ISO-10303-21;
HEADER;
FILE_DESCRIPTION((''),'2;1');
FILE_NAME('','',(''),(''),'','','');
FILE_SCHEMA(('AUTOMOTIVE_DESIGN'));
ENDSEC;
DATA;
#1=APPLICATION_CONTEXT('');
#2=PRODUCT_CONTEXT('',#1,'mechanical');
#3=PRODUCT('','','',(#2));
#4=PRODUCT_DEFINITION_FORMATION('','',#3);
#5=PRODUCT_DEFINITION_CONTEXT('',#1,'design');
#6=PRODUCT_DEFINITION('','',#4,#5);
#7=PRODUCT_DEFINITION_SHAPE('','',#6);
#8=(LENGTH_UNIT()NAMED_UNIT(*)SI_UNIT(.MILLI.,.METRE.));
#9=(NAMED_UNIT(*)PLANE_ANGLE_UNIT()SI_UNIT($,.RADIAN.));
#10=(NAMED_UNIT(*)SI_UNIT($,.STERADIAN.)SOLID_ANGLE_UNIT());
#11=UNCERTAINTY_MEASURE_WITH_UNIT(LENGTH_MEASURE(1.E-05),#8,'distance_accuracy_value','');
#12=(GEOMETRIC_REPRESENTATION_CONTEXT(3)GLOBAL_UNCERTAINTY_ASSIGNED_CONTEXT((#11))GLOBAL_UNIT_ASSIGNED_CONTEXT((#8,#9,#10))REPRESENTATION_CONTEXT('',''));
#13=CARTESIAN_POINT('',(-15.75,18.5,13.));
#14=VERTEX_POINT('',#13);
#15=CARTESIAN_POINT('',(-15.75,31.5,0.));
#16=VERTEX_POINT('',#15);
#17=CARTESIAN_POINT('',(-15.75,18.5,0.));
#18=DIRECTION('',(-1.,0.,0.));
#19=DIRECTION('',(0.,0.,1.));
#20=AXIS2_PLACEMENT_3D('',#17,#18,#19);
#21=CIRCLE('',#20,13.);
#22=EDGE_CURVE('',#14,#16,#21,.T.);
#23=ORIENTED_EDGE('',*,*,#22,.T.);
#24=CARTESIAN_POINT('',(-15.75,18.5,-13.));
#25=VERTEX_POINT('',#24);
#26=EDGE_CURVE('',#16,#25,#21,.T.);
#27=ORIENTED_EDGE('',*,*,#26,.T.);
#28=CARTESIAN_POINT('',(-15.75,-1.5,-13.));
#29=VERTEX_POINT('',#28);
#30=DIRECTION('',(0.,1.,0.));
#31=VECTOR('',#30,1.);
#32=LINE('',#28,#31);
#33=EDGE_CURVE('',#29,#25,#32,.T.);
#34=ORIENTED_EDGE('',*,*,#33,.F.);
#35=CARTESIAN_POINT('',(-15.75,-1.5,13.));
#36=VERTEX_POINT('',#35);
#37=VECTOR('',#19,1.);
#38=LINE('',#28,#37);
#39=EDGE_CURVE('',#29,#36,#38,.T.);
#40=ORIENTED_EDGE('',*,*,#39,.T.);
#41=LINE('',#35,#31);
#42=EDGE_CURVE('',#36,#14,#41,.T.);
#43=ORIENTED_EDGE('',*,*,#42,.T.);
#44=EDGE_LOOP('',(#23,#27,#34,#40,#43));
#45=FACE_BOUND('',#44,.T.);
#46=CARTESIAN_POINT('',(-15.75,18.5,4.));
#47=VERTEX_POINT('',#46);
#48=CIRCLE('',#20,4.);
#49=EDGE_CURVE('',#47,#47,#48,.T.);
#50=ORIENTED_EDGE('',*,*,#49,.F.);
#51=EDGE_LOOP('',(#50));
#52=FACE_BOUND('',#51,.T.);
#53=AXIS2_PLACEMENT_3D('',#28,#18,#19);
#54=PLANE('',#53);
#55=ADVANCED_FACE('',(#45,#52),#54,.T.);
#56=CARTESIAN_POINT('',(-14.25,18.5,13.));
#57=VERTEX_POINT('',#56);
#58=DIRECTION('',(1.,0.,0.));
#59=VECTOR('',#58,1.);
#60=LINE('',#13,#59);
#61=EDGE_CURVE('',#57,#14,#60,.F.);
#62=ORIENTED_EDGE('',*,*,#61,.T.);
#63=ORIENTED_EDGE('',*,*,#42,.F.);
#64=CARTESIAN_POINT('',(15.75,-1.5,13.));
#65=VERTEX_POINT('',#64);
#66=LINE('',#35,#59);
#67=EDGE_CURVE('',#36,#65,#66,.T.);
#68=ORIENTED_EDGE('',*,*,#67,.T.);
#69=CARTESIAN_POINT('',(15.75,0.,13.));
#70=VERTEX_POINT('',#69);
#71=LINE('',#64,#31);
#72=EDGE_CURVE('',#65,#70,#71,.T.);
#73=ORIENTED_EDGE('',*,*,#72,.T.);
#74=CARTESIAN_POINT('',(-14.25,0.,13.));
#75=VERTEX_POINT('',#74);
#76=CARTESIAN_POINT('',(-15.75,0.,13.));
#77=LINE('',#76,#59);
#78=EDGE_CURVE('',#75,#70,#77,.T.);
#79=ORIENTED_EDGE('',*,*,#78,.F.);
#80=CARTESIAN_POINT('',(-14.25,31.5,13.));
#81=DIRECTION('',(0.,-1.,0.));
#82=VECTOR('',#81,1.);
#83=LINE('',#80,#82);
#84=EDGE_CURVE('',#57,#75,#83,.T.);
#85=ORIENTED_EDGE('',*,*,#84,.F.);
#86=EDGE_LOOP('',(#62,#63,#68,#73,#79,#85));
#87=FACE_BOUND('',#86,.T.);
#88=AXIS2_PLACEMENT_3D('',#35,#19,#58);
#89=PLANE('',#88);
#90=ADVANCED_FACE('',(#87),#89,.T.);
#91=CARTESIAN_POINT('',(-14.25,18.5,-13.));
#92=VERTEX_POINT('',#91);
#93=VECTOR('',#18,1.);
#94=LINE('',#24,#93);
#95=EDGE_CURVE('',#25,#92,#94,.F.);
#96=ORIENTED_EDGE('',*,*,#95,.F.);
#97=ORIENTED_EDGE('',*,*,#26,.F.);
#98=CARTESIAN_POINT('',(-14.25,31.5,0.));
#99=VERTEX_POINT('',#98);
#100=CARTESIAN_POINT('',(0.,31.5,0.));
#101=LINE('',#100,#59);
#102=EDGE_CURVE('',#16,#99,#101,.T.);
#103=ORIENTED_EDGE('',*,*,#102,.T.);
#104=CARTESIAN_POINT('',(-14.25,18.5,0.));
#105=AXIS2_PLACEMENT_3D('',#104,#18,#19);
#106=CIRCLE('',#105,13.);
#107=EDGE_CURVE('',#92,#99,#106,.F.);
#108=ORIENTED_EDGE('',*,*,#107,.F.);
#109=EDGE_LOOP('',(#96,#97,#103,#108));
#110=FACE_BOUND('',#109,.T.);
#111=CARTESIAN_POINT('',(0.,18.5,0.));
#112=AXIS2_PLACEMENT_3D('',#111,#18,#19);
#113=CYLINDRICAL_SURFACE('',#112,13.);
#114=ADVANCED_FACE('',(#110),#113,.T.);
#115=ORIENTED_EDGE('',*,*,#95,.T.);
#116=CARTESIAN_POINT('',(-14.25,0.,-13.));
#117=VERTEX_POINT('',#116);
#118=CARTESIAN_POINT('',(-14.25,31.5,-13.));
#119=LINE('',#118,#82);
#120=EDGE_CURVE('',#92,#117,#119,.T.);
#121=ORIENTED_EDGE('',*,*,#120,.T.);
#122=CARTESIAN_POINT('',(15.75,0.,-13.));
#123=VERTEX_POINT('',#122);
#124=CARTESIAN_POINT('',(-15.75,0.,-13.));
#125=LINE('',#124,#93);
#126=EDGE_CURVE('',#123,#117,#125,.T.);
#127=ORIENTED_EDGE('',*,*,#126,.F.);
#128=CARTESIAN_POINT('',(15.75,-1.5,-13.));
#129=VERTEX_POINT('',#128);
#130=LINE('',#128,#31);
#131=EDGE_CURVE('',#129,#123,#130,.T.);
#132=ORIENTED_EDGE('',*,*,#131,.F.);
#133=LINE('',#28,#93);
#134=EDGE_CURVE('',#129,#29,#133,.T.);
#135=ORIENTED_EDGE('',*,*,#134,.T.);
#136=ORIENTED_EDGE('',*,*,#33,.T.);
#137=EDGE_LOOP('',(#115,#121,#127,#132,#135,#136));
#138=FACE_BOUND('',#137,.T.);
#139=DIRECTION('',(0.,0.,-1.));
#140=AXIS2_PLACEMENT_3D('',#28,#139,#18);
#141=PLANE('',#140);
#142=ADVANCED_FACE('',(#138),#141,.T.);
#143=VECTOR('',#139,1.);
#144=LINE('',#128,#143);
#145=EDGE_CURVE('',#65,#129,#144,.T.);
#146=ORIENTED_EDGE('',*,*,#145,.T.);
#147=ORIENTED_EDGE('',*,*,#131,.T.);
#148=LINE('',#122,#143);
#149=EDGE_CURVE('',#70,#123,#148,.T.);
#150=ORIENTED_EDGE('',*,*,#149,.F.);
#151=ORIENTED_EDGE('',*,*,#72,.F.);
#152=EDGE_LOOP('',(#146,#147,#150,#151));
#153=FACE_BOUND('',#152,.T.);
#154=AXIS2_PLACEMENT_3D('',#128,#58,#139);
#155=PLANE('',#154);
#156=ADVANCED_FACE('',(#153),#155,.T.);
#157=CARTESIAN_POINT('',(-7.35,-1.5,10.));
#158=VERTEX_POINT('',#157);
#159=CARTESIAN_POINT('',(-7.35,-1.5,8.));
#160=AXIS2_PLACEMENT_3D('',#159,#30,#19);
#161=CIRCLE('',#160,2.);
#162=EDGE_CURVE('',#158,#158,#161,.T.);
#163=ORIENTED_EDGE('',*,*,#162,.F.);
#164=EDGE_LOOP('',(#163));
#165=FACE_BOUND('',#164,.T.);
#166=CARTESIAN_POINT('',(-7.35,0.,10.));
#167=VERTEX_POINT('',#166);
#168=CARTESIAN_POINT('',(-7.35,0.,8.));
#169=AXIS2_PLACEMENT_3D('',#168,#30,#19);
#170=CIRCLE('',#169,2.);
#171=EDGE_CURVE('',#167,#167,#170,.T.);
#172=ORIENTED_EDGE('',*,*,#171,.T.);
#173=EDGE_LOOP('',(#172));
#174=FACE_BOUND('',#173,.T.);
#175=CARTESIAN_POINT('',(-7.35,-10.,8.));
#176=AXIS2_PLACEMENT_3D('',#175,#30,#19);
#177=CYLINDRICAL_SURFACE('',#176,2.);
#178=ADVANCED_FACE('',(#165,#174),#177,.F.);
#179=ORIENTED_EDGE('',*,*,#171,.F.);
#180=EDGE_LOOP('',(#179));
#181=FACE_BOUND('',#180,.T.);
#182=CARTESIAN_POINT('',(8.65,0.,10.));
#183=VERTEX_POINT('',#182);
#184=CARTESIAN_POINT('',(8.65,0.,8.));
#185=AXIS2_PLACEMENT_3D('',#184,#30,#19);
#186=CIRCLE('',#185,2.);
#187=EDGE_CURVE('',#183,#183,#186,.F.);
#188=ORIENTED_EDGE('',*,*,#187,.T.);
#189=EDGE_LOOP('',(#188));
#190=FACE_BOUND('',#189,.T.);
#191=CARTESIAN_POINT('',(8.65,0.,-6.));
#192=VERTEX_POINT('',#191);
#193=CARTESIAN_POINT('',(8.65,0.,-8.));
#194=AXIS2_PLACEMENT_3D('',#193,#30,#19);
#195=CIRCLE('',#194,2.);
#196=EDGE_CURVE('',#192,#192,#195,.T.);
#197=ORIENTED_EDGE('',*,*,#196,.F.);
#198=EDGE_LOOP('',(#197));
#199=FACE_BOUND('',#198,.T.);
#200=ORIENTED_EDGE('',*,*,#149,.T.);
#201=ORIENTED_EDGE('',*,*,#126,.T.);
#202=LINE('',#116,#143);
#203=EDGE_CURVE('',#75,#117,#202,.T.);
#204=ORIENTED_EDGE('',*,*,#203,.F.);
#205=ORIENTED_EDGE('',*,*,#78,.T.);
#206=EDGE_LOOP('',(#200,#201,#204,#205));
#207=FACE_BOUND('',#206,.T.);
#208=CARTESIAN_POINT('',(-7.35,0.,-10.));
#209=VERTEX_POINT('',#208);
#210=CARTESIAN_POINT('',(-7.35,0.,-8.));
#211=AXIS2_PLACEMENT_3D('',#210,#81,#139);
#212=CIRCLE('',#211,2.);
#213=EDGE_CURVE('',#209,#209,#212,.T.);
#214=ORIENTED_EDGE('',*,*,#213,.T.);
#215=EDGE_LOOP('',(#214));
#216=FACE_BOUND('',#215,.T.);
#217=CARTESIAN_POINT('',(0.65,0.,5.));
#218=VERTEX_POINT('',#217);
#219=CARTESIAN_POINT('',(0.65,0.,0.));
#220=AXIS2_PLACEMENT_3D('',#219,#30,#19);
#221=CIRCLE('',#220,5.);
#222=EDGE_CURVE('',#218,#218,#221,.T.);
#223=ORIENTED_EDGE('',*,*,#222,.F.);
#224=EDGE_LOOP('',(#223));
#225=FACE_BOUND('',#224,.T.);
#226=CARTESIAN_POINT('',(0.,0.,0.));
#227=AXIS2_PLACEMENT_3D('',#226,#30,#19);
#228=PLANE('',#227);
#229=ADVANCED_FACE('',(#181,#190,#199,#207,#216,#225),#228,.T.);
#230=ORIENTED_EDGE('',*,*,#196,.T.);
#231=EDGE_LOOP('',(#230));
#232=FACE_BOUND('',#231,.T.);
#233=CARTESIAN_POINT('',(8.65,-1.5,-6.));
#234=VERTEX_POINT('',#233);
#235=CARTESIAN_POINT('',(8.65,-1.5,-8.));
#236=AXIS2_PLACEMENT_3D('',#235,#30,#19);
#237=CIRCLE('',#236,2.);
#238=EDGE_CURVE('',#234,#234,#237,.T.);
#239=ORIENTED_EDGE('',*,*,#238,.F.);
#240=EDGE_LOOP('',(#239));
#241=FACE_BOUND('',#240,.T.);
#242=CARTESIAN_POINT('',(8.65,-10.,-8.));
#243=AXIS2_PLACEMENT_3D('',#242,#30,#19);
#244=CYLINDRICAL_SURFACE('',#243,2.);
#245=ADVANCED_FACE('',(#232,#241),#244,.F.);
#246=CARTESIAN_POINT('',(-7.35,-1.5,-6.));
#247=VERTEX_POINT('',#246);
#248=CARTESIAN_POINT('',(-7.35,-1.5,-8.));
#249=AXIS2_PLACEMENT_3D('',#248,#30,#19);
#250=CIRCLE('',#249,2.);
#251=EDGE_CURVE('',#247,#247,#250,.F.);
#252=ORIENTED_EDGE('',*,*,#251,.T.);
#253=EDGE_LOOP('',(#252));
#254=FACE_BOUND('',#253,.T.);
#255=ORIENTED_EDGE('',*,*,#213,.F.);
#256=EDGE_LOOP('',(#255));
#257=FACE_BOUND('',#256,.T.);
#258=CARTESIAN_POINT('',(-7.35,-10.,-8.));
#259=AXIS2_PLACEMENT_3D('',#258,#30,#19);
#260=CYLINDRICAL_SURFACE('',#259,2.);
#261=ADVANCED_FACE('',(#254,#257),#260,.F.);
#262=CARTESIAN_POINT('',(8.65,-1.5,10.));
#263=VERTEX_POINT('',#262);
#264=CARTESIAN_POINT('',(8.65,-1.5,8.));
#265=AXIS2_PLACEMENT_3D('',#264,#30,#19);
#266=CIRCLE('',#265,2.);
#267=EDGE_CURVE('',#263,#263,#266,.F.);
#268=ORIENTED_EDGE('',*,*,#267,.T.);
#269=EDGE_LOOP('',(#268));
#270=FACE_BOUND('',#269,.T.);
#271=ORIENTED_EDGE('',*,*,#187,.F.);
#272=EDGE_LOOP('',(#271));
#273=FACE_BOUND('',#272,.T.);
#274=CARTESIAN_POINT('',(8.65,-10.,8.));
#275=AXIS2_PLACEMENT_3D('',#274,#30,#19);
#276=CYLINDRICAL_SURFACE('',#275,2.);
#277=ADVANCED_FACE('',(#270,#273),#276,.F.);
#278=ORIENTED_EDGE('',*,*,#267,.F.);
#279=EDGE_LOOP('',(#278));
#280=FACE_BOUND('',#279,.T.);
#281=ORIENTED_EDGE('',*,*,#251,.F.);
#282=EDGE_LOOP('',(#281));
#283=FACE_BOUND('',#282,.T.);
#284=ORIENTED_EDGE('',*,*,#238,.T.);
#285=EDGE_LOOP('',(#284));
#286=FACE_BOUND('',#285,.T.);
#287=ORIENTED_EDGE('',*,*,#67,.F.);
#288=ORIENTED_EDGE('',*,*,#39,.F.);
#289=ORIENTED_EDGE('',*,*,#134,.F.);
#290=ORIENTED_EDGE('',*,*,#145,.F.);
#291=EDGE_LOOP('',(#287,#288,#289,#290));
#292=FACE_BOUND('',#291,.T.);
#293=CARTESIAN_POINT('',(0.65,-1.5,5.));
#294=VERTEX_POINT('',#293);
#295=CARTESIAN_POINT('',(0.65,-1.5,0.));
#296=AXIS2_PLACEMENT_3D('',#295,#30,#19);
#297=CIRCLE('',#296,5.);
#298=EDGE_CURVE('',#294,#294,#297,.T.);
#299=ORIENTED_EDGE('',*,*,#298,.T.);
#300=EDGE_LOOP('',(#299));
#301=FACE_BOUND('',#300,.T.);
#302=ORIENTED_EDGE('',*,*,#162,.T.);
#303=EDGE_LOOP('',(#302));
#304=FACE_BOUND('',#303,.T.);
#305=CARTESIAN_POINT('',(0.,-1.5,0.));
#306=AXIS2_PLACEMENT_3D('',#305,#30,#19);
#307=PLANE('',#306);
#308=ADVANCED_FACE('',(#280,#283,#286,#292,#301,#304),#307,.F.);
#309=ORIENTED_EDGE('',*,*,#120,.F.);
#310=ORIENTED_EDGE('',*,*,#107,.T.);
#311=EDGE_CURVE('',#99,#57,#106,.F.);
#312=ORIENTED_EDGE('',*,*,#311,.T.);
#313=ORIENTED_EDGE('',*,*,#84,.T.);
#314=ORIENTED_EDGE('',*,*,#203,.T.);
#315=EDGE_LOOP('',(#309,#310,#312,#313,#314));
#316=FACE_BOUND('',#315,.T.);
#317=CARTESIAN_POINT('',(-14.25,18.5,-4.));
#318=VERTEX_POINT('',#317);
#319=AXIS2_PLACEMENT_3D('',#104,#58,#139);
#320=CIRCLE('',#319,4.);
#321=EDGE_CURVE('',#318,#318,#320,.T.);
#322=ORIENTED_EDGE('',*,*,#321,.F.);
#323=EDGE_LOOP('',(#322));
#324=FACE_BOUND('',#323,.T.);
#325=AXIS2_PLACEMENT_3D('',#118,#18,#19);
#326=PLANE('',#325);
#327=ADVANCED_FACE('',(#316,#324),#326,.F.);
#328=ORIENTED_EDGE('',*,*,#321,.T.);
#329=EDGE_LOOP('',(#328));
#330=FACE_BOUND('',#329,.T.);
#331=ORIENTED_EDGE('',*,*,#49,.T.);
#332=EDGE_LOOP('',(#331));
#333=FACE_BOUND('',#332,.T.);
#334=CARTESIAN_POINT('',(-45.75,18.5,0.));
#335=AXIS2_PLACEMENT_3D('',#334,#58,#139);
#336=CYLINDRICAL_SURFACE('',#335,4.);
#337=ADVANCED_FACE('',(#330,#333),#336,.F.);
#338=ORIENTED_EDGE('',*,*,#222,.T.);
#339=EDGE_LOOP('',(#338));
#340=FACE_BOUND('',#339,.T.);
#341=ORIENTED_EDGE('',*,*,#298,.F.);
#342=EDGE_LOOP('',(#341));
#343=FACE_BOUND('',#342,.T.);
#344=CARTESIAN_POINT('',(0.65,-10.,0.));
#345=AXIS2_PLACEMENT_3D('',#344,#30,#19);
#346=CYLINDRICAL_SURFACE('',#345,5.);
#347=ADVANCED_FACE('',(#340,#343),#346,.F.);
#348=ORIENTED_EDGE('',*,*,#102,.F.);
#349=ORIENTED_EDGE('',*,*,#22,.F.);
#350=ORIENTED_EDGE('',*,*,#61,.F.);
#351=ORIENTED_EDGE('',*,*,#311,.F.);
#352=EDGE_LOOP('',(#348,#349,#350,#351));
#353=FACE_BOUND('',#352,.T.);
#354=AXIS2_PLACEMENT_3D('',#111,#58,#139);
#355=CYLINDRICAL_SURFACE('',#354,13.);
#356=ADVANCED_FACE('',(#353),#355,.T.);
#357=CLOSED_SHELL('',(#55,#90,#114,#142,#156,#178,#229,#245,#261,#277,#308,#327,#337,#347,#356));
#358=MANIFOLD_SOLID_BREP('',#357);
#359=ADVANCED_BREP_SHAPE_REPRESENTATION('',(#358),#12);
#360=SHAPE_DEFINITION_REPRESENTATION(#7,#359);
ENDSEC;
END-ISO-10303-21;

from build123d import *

# Parameters (mm, degrees)
SKETCH3_W           = 31.5
SKETCH3_H           = 26
BOSS_EXTRUDE1_DEPTH = 1.5
SKETCH4_W           = 1.5
SKETCH4_H           = 26
BOSS_EXTRUDE3_DEPTH = 31.5
FILLET3_R           = 13
FILLET4_R           = 13
SKETCH5_R           = 4
CUT_EXTRUDE1_DEPTH  = 31.5
SKETCH7_R           = 2
SKETCH7_R_2         = 5
CUT_EXTRUDE2_DEPTH  = 10


with BuildPart() as part:
    # Sketch3 → Boss-Extrude1 (new body)
    with BuildSketch(Plane(origin=(0, 0, 0), x_dir=(1, 0, 0), z_dir=(0, 1, 0))):
        Rectangle(SKETCH3_W, SKETCH3_H)
    extrude(amount=-BOSS_EXTRUDE1_DEPTH)

    # Sketch4 → Boss-Extrude3 (add)
    with BuildSketch(Plane(origin=(0, 0, 0), x_dir=(1, 0, 0), z_dir=(0, 1, 0))):
        with Locations((-15, 0)):
            Rectangle(SKETCH4_W, SKETCH4_H)
    extrude(amount=BOSS_EXTRUDE3_DEPTH)

    # Fillet3
    fillet3_edges = [part.edges().sort_by_distance(p)[0] for p in [
        (-15, 31.5, 13),
    ]]
    fillet(fillet3_edges, radius=FILLET3_R)

    # Fillet4
    fillet4_edges = [part.edges().sort_by_distance(p)[0] for p in [
        (-15, 31.5, -13),
    ]]
    fillet(fillet4_edges, radius=FILLET4_R - 0.0001)  # a hair under: the kernel refuses the full size

    # Sketch5 → Cut-Extrude1 (cut)
    with BuildSketch(Plane(origin=(-14.25, 0, 0), x_dir=(0, 0, -1), z_dir=(1, 0, 0))):
        with Locations((0, 18.5)):
            Circle(SKETCH5_R)
    extrude(amount=-CUT_EXTRUDE1_DEPTH, mode=Mode.SUBTRACT)

    # Sketch7 → Cut-Extrude2 (cut)
    with BuildSketch(Plane(origin=(0, 0, 0), x_dir=(1, 0, 0), z_dir=(0, 1, 0))):
        with Locations(Location((8.65, 8, 0), (0, 0, 270))):
            Circle(SKETCH7_R)
        with Locations(Location((8.65, -8, 0), (0, 0, 270))):
            Circle(SKETCH7_R)
        with Locations(Location((0.65, 0, 0), (0, 0, 270))):
            Circle(SKETCH7_R_2)
        with Locations(Location((-7.35, 8, 0), (0, 0, 270))):
            Circle(SKETCH7_R)
        with Locations(Location((-7.35, -8, 0), (0, 0, 270))):
            Circle(SKETCH7_R)
    extrude(amount=-CUT_EXTRUDE2_DEPTH, mode=Mode.SUBTRACT)


solid = part.part
